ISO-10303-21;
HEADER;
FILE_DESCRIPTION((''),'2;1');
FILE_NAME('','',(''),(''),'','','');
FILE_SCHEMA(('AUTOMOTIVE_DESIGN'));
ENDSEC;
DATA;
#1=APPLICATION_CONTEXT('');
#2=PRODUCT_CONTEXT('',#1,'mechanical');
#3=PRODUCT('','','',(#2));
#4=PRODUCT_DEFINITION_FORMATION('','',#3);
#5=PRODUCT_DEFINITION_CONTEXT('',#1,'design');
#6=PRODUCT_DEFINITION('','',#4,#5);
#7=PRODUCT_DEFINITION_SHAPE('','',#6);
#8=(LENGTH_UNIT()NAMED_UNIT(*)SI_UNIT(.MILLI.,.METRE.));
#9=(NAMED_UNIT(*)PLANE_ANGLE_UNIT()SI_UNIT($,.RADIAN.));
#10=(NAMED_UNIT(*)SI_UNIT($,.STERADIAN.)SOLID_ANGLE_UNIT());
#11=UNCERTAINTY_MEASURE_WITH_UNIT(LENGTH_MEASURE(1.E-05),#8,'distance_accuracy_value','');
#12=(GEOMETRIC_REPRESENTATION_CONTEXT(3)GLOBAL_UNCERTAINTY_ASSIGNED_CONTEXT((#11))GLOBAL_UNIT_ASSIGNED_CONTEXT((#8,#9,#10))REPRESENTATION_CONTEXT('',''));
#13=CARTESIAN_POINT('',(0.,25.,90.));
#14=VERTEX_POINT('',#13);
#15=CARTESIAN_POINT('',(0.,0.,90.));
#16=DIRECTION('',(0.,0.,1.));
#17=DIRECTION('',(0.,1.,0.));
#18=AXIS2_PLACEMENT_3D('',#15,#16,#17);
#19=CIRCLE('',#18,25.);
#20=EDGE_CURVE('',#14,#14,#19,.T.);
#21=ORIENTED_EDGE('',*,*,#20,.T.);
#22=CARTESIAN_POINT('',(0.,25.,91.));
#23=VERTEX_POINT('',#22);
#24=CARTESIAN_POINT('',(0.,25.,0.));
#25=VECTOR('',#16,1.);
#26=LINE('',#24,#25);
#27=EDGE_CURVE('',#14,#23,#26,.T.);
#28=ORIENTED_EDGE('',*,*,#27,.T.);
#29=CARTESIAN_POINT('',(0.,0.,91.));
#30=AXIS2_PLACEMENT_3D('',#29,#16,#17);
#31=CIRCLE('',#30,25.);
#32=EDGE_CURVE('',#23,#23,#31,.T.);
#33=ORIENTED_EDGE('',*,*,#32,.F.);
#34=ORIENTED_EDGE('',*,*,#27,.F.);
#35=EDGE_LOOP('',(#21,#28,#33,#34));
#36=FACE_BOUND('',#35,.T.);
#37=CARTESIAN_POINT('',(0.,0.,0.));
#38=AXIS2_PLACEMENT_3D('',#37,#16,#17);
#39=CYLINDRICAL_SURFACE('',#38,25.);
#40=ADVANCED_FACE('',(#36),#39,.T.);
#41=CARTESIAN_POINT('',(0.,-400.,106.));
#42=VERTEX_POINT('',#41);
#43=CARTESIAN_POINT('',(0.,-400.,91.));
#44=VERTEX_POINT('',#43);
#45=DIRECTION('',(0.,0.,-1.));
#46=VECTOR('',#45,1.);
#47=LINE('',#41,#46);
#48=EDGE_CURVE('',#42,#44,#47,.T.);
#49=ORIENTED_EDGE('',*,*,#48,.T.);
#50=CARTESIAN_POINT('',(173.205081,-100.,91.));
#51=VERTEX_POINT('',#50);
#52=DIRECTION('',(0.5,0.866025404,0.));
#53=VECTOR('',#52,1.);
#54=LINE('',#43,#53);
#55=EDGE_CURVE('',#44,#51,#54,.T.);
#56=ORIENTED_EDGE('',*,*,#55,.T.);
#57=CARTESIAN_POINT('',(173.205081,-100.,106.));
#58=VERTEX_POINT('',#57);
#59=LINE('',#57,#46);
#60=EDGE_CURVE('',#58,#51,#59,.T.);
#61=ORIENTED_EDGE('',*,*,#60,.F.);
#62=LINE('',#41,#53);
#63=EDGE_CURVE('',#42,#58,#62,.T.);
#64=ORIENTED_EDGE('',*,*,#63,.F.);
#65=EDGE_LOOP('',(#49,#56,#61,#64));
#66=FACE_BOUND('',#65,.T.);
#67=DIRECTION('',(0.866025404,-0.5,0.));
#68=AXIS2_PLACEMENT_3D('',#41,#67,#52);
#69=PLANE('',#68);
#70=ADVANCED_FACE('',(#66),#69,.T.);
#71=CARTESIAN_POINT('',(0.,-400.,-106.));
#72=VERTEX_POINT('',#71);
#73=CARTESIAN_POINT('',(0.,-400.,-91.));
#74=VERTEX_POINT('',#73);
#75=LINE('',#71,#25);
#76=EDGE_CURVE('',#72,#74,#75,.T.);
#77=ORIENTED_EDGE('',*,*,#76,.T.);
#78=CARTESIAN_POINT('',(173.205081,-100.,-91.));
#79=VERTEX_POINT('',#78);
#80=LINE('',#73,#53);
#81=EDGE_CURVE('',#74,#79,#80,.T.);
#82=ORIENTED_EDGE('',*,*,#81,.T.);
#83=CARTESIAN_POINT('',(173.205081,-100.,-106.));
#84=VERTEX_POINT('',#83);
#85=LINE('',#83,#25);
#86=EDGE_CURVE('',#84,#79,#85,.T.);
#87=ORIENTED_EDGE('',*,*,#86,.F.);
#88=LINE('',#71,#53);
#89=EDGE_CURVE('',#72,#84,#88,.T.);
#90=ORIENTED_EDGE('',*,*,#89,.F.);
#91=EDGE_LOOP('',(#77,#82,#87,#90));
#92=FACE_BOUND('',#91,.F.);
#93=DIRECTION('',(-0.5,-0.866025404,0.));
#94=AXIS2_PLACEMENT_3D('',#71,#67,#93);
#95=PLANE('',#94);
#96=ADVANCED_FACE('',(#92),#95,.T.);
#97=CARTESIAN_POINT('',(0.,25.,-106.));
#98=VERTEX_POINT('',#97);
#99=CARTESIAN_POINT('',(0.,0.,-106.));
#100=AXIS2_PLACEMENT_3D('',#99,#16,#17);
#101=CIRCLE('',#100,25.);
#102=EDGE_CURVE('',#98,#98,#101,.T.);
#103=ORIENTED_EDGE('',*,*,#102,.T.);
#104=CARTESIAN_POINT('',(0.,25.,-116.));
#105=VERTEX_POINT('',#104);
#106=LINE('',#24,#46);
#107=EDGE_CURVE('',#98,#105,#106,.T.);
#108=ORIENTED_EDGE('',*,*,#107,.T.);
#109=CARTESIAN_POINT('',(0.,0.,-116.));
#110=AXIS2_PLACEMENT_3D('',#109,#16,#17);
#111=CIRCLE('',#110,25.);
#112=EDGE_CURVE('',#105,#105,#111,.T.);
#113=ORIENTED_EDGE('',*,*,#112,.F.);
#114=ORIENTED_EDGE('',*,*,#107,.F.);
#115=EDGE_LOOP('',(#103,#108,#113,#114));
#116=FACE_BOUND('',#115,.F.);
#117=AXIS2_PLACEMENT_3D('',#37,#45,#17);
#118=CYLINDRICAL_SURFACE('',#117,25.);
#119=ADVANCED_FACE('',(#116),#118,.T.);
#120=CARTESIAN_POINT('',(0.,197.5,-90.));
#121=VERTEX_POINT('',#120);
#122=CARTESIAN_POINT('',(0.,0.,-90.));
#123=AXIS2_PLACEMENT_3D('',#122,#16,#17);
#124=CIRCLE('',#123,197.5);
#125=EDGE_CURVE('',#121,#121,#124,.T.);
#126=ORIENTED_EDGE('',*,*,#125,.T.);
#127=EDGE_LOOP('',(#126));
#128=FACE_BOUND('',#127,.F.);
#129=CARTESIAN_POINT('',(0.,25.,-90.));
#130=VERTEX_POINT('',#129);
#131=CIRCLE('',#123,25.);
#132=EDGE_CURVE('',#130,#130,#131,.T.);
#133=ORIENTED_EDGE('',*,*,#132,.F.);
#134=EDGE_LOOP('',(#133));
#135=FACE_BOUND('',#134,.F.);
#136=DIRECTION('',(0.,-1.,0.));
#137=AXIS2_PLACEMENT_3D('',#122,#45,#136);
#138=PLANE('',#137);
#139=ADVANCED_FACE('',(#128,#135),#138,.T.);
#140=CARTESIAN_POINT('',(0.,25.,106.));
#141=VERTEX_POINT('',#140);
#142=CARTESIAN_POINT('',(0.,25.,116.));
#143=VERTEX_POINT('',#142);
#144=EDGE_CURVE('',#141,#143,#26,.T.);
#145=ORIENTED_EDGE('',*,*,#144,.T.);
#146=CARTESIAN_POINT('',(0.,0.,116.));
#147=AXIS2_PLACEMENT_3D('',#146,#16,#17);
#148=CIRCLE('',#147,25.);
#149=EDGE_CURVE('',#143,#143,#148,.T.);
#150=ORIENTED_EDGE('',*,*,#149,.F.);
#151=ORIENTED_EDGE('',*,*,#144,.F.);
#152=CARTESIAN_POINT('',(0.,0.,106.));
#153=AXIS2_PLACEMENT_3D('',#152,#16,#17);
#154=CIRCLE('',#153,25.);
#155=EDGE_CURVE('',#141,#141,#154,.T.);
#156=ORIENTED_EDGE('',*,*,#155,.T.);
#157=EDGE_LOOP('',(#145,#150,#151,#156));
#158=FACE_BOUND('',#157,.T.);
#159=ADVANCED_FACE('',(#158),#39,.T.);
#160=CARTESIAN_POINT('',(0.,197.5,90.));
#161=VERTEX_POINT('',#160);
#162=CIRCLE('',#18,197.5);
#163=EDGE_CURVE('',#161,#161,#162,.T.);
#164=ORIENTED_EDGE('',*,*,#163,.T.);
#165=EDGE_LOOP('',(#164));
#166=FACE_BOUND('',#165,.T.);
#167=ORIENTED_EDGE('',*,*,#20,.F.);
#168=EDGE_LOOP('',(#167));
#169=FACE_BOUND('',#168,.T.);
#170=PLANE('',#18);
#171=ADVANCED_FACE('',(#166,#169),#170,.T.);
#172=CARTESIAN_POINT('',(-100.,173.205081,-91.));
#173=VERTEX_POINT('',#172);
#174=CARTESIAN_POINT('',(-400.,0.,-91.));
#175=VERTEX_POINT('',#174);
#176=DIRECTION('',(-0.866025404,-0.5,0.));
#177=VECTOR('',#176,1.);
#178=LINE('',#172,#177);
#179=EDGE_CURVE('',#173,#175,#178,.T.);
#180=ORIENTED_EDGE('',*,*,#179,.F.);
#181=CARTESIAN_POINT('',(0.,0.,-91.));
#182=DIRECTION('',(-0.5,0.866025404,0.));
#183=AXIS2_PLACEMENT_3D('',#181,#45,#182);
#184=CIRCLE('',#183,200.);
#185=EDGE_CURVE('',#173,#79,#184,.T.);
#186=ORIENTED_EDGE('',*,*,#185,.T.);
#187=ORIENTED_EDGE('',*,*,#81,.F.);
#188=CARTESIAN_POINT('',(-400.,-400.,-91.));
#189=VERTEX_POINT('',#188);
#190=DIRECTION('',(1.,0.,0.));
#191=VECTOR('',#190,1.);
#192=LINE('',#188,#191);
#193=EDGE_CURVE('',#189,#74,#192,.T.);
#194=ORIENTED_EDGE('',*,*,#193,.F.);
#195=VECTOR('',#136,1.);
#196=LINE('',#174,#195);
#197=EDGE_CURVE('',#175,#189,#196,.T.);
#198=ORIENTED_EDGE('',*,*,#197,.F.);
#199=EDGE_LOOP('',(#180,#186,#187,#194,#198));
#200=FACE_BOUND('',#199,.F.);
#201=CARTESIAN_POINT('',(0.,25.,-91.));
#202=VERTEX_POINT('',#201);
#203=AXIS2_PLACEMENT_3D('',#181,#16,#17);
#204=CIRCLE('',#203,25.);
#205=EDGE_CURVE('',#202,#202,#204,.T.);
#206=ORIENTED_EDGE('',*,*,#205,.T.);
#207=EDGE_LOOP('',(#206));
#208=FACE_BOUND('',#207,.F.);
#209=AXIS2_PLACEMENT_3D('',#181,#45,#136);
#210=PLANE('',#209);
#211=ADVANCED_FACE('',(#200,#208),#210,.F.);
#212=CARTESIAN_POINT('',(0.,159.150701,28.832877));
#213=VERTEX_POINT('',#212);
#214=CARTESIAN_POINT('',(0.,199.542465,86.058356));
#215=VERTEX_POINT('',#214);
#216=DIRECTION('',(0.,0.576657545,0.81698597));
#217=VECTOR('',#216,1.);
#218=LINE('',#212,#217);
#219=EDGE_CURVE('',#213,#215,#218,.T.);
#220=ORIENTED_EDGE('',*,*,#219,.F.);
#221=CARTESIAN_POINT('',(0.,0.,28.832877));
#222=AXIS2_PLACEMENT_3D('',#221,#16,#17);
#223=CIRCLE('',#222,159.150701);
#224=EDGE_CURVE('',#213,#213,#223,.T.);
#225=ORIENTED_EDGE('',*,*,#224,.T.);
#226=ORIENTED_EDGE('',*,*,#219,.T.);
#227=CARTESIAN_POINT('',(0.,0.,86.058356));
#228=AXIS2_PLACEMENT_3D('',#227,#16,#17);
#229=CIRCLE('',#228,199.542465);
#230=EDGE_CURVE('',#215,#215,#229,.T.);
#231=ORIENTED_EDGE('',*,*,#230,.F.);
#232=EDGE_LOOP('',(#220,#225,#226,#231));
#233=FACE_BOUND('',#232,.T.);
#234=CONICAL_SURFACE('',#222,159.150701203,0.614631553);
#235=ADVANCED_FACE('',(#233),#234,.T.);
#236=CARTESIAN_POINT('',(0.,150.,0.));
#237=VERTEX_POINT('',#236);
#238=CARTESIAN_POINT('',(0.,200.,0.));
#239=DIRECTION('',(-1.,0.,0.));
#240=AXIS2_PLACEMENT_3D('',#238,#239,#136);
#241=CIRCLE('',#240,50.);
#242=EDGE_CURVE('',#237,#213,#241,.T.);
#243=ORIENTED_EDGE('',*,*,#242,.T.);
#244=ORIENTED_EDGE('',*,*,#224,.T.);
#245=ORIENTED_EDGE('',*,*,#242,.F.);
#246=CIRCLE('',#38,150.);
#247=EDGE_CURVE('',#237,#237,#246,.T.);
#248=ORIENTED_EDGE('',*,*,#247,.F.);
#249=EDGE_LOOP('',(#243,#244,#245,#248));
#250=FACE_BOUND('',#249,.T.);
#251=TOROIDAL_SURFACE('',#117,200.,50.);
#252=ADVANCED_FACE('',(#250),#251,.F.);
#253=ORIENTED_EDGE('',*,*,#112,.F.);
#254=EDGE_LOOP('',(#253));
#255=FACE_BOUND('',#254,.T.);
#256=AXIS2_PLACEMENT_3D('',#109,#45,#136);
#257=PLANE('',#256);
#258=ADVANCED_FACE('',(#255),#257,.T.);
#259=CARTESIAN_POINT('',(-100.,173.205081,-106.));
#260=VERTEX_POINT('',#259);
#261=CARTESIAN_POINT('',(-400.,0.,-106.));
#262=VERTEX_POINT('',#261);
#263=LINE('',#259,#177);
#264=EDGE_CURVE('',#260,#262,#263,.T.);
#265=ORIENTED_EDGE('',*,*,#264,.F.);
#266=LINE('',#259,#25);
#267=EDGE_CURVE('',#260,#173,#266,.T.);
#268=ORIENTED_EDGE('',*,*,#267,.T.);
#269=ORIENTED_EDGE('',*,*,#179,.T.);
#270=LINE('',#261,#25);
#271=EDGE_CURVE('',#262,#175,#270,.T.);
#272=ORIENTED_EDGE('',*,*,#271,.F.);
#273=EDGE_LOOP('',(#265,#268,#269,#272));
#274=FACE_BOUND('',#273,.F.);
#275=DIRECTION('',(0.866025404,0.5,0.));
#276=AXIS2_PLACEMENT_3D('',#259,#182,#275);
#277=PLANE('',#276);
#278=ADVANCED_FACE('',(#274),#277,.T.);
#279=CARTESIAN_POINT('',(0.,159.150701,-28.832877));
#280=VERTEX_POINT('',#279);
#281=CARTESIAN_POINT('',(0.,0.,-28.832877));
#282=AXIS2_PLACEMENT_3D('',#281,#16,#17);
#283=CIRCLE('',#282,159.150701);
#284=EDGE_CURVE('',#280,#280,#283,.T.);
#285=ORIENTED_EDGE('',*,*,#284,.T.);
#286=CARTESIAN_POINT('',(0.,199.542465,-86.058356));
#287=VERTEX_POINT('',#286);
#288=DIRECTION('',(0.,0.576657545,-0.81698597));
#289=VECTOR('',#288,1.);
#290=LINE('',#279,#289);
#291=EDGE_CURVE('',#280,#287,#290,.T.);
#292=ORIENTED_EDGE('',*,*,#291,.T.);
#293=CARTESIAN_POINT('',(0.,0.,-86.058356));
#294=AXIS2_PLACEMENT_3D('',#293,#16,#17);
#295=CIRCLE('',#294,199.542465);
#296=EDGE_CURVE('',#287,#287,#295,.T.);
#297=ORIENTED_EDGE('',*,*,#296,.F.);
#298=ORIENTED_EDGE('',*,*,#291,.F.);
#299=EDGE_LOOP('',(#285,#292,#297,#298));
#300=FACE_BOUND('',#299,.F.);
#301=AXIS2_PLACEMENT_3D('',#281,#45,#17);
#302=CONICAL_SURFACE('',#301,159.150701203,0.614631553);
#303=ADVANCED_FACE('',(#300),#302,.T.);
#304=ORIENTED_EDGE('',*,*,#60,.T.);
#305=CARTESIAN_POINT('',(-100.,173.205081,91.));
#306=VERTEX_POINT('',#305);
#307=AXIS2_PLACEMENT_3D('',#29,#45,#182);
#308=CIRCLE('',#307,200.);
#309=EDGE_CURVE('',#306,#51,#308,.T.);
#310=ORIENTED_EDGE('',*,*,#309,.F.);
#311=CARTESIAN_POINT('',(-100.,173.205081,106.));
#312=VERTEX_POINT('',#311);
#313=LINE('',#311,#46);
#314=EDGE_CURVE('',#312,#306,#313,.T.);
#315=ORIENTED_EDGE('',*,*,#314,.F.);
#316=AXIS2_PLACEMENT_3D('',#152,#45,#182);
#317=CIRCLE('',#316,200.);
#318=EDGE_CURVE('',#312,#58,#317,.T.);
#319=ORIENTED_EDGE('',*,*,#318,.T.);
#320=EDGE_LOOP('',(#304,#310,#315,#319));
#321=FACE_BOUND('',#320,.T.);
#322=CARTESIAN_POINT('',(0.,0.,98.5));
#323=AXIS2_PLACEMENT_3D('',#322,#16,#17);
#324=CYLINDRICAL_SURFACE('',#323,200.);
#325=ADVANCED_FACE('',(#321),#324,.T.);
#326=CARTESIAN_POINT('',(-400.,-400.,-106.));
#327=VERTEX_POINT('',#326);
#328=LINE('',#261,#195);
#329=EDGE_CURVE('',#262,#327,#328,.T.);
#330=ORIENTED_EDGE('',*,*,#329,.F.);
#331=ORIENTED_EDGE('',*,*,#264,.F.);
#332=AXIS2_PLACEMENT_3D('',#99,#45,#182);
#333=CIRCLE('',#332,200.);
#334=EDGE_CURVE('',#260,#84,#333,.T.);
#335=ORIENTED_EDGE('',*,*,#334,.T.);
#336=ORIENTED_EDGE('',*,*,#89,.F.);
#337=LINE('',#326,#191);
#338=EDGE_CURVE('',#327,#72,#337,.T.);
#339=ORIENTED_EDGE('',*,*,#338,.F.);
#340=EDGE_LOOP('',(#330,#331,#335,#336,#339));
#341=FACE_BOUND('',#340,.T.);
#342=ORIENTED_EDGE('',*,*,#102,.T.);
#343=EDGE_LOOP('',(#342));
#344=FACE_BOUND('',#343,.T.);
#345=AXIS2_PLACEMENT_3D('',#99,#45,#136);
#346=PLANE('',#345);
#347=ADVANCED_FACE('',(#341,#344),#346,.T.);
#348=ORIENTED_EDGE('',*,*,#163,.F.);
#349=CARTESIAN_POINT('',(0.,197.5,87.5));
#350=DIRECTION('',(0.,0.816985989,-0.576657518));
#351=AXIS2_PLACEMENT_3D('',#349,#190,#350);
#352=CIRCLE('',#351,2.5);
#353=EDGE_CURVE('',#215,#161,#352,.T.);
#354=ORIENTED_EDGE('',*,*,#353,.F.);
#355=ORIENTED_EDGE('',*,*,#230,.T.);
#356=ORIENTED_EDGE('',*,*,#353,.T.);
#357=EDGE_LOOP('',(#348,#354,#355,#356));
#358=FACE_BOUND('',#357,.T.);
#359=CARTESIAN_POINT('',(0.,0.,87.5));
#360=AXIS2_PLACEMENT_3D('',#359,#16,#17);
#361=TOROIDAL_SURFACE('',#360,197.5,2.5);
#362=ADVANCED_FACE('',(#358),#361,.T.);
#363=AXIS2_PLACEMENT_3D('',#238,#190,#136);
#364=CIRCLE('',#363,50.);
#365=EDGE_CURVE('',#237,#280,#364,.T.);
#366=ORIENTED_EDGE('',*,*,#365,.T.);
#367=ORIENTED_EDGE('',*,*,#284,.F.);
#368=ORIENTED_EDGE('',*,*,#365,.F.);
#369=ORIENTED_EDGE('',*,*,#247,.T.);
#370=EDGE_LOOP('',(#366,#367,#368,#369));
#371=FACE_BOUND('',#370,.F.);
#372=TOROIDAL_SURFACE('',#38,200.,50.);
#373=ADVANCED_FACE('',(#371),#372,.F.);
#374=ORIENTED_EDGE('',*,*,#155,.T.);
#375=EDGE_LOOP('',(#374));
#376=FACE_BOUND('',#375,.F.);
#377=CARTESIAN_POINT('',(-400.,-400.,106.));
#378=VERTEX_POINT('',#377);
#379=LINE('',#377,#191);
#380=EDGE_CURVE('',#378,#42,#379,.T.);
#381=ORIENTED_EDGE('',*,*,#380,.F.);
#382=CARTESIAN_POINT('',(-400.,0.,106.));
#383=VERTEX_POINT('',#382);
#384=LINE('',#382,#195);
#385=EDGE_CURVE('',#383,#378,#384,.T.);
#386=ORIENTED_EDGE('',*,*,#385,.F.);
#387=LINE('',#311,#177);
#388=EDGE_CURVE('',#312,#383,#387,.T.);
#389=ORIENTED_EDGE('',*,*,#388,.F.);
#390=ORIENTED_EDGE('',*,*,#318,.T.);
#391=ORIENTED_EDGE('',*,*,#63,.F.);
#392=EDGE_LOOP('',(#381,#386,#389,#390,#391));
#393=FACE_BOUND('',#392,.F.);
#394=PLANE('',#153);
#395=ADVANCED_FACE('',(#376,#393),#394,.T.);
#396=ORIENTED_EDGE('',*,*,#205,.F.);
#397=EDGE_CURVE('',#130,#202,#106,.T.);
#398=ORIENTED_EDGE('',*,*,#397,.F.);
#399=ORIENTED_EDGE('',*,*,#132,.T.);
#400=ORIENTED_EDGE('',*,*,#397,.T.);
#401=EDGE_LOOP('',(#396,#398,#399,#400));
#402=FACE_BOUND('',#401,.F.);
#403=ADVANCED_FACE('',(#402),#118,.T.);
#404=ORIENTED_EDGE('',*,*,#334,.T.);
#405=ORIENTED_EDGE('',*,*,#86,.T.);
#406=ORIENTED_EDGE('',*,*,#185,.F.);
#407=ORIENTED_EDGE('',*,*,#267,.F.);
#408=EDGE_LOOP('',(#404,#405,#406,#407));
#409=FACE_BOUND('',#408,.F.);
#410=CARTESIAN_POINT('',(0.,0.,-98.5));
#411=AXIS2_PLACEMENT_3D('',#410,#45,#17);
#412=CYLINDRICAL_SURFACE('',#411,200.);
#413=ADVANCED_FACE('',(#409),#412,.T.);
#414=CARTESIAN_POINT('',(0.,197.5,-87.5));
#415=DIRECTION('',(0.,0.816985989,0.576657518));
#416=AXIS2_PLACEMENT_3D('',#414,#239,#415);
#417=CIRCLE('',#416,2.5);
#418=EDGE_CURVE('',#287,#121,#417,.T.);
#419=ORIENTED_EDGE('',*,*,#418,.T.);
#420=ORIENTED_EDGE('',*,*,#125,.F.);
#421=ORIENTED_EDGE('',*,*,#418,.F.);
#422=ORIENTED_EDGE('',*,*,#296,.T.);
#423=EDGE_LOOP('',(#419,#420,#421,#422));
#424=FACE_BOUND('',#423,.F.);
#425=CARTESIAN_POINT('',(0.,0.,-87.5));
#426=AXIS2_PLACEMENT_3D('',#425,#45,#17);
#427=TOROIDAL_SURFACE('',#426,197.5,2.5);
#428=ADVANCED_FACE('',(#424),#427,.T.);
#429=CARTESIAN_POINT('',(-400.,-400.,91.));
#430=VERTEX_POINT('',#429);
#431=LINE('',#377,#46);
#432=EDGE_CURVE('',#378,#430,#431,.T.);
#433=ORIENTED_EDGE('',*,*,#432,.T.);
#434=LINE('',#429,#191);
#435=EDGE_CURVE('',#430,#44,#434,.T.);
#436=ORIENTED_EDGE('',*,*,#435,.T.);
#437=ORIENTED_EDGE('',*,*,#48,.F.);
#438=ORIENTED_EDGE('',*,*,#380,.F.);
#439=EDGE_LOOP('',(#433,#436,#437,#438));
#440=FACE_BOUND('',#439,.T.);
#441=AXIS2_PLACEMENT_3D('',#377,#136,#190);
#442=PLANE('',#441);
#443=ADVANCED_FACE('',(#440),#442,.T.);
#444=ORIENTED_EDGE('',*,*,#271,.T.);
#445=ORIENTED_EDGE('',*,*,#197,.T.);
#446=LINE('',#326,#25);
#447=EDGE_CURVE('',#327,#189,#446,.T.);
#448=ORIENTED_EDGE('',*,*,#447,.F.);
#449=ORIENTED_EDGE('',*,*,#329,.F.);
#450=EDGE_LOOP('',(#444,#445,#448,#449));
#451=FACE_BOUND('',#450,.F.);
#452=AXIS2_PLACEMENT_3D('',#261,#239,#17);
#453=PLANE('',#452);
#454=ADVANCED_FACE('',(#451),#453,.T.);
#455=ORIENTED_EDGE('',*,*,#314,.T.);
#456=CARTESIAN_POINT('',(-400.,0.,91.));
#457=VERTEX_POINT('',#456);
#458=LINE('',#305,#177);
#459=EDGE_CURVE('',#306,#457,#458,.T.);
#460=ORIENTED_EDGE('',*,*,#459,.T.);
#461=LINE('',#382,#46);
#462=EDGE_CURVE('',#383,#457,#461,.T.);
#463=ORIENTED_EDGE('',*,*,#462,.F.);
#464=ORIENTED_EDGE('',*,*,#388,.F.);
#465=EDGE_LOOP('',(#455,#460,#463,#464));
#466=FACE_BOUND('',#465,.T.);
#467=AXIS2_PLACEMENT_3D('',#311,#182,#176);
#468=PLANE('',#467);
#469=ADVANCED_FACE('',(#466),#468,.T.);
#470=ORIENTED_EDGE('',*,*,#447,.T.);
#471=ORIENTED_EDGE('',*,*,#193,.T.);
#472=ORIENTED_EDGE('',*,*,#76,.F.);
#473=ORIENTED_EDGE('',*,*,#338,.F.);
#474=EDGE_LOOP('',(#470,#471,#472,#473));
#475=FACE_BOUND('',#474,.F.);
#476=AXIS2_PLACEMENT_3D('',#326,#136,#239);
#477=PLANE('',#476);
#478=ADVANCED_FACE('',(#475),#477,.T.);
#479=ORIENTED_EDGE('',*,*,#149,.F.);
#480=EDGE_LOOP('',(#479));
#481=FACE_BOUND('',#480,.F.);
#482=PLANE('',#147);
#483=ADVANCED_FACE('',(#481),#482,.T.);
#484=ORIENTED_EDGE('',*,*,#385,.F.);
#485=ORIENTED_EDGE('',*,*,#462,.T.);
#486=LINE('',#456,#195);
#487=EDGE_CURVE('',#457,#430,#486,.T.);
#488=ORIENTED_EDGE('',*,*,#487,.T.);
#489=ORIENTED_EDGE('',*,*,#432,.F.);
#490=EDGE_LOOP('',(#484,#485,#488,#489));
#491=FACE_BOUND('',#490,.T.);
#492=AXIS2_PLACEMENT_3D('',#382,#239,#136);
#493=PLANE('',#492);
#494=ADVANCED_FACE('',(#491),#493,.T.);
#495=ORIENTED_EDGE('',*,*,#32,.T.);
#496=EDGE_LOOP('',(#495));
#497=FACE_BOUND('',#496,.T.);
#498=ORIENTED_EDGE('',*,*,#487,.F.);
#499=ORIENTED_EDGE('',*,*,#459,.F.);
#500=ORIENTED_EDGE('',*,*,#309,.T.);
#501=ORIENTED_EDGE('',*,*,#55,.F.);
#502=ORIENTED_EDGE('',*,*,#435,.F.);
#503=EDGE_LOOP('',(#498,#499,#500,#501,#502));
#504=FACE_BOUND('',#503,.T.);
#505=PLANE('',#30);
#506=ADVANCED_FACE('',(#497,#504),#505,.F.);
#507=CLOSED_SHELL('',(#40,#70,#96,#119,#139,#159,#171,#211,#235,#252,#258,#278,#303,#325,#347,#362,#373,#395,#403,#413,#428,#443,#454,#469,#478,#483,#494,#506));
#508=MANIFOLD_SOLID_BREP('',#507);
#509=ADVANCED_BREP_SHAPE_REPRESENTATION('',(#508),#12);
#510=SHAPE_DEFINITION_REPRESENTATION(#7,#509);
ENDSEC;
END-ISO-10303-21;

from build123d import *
from build123d import SkipClean  # not in build123d's __all__

# Parameters (mm, degrees)
F0_W     = 25
F0_H     = 10
F0_H_2   = 15
F0_W_2   = 175
F5_DEPTH = 15


# Not quite as in the source:
# - ends of sketch curves that miss each other by under 0.0002 mm in the source are joined


with BuildPart() as f1:
    # F0 (on Right) → F1 (revolve)
    with BuildSketch(Plane.YZ):
        with Locations((12.5, 111)):
            Rectangle(F0_W, F0_H)
        with Locations((12.5, 98.5)):
            Rectangle(F0_W, F0_H_2)
        Polygon((0, 0), (25, 0), (25, 90), (25, 91), (0, 91), align=None)
    revolve(axis=Axis((0, 0, 58), (0, 0, 1)))

    # F0 (on Right) → F2 (revolve)
    with BuildSketch(Plane.YZ):
        with BuildLine():
            ThreePointArc((150, 0), (152.3425507406, 15.1250629778), (159.1507012033, 28.8328768565))
            Line((159.1507012033, 28.8328768565), (199.542465, 86.058356))
            ThreePointArc((199.542465, 86.058356), (199.7196970287, 88.6501935058), (197.5, 90))
            Line((197.5, 90), (25, 90))
            Line((25, 90), (25, 0))
            Line((25, 0), (150, 0))
        make_face()
    revolve(axis=Axis((0, 0, 58), (0, 0, 1)))

    # F0 (on Right) → F3 (revolve)
    with BuildSketch(Plane.YZ):
        with Locations((112.5, 98.5)):
            Rectangle(F0_W_2, F0_H_2)
    revolve(axis=Axis((0, 0, 58), (0, 0, 1)))

    # F4 (on face) → F5 (join, through all)
    with BuildSketch(Plane.XY.offset(106)):
        with BuildLine():
            ThreePointArc((0, -200), (-141.4213562373, -141.4213562373), (-200, 0))
            Line((-200, 0), (-400, 0))
            Line((-400, 0), (-400, -400))
            Line((-400, -400), (0, -400))
            Line((0, -400), (0, -200))
        make_face()
        with BuildLine():
            Line((-400, 0), (-200, 0))
            ThreePointArc((-200, 0), (-173.2050807569, 100), (-100, 173.2050807569))
            Line((-100, 173.2050807569), (-400, 0))
        make_face()
        with BuildLine():
            ThreePointArc((173.2050807569, -100), (100, -173.2050807569), (0, -200))
            Line((0, -200), (0, -400))
            Line((0, -400), (173.2050807569, -100))
        make_face()
    extrude(amount=-F5_DEPTH)

    # F6: F1 across face


with BuildPart() as f1_1:
    add(f1.part, clean=False)
    with SkipClean():  # cleaning this boolean's faces spoils the solid; the shape is the same uncleaned
        add(f1.part.mirror(Plane(origin=(0, 0, 0), x_dir=(1, 0, 0), z_dir=(0, 0, -1))), clean=False)


solid = f1_1.part
